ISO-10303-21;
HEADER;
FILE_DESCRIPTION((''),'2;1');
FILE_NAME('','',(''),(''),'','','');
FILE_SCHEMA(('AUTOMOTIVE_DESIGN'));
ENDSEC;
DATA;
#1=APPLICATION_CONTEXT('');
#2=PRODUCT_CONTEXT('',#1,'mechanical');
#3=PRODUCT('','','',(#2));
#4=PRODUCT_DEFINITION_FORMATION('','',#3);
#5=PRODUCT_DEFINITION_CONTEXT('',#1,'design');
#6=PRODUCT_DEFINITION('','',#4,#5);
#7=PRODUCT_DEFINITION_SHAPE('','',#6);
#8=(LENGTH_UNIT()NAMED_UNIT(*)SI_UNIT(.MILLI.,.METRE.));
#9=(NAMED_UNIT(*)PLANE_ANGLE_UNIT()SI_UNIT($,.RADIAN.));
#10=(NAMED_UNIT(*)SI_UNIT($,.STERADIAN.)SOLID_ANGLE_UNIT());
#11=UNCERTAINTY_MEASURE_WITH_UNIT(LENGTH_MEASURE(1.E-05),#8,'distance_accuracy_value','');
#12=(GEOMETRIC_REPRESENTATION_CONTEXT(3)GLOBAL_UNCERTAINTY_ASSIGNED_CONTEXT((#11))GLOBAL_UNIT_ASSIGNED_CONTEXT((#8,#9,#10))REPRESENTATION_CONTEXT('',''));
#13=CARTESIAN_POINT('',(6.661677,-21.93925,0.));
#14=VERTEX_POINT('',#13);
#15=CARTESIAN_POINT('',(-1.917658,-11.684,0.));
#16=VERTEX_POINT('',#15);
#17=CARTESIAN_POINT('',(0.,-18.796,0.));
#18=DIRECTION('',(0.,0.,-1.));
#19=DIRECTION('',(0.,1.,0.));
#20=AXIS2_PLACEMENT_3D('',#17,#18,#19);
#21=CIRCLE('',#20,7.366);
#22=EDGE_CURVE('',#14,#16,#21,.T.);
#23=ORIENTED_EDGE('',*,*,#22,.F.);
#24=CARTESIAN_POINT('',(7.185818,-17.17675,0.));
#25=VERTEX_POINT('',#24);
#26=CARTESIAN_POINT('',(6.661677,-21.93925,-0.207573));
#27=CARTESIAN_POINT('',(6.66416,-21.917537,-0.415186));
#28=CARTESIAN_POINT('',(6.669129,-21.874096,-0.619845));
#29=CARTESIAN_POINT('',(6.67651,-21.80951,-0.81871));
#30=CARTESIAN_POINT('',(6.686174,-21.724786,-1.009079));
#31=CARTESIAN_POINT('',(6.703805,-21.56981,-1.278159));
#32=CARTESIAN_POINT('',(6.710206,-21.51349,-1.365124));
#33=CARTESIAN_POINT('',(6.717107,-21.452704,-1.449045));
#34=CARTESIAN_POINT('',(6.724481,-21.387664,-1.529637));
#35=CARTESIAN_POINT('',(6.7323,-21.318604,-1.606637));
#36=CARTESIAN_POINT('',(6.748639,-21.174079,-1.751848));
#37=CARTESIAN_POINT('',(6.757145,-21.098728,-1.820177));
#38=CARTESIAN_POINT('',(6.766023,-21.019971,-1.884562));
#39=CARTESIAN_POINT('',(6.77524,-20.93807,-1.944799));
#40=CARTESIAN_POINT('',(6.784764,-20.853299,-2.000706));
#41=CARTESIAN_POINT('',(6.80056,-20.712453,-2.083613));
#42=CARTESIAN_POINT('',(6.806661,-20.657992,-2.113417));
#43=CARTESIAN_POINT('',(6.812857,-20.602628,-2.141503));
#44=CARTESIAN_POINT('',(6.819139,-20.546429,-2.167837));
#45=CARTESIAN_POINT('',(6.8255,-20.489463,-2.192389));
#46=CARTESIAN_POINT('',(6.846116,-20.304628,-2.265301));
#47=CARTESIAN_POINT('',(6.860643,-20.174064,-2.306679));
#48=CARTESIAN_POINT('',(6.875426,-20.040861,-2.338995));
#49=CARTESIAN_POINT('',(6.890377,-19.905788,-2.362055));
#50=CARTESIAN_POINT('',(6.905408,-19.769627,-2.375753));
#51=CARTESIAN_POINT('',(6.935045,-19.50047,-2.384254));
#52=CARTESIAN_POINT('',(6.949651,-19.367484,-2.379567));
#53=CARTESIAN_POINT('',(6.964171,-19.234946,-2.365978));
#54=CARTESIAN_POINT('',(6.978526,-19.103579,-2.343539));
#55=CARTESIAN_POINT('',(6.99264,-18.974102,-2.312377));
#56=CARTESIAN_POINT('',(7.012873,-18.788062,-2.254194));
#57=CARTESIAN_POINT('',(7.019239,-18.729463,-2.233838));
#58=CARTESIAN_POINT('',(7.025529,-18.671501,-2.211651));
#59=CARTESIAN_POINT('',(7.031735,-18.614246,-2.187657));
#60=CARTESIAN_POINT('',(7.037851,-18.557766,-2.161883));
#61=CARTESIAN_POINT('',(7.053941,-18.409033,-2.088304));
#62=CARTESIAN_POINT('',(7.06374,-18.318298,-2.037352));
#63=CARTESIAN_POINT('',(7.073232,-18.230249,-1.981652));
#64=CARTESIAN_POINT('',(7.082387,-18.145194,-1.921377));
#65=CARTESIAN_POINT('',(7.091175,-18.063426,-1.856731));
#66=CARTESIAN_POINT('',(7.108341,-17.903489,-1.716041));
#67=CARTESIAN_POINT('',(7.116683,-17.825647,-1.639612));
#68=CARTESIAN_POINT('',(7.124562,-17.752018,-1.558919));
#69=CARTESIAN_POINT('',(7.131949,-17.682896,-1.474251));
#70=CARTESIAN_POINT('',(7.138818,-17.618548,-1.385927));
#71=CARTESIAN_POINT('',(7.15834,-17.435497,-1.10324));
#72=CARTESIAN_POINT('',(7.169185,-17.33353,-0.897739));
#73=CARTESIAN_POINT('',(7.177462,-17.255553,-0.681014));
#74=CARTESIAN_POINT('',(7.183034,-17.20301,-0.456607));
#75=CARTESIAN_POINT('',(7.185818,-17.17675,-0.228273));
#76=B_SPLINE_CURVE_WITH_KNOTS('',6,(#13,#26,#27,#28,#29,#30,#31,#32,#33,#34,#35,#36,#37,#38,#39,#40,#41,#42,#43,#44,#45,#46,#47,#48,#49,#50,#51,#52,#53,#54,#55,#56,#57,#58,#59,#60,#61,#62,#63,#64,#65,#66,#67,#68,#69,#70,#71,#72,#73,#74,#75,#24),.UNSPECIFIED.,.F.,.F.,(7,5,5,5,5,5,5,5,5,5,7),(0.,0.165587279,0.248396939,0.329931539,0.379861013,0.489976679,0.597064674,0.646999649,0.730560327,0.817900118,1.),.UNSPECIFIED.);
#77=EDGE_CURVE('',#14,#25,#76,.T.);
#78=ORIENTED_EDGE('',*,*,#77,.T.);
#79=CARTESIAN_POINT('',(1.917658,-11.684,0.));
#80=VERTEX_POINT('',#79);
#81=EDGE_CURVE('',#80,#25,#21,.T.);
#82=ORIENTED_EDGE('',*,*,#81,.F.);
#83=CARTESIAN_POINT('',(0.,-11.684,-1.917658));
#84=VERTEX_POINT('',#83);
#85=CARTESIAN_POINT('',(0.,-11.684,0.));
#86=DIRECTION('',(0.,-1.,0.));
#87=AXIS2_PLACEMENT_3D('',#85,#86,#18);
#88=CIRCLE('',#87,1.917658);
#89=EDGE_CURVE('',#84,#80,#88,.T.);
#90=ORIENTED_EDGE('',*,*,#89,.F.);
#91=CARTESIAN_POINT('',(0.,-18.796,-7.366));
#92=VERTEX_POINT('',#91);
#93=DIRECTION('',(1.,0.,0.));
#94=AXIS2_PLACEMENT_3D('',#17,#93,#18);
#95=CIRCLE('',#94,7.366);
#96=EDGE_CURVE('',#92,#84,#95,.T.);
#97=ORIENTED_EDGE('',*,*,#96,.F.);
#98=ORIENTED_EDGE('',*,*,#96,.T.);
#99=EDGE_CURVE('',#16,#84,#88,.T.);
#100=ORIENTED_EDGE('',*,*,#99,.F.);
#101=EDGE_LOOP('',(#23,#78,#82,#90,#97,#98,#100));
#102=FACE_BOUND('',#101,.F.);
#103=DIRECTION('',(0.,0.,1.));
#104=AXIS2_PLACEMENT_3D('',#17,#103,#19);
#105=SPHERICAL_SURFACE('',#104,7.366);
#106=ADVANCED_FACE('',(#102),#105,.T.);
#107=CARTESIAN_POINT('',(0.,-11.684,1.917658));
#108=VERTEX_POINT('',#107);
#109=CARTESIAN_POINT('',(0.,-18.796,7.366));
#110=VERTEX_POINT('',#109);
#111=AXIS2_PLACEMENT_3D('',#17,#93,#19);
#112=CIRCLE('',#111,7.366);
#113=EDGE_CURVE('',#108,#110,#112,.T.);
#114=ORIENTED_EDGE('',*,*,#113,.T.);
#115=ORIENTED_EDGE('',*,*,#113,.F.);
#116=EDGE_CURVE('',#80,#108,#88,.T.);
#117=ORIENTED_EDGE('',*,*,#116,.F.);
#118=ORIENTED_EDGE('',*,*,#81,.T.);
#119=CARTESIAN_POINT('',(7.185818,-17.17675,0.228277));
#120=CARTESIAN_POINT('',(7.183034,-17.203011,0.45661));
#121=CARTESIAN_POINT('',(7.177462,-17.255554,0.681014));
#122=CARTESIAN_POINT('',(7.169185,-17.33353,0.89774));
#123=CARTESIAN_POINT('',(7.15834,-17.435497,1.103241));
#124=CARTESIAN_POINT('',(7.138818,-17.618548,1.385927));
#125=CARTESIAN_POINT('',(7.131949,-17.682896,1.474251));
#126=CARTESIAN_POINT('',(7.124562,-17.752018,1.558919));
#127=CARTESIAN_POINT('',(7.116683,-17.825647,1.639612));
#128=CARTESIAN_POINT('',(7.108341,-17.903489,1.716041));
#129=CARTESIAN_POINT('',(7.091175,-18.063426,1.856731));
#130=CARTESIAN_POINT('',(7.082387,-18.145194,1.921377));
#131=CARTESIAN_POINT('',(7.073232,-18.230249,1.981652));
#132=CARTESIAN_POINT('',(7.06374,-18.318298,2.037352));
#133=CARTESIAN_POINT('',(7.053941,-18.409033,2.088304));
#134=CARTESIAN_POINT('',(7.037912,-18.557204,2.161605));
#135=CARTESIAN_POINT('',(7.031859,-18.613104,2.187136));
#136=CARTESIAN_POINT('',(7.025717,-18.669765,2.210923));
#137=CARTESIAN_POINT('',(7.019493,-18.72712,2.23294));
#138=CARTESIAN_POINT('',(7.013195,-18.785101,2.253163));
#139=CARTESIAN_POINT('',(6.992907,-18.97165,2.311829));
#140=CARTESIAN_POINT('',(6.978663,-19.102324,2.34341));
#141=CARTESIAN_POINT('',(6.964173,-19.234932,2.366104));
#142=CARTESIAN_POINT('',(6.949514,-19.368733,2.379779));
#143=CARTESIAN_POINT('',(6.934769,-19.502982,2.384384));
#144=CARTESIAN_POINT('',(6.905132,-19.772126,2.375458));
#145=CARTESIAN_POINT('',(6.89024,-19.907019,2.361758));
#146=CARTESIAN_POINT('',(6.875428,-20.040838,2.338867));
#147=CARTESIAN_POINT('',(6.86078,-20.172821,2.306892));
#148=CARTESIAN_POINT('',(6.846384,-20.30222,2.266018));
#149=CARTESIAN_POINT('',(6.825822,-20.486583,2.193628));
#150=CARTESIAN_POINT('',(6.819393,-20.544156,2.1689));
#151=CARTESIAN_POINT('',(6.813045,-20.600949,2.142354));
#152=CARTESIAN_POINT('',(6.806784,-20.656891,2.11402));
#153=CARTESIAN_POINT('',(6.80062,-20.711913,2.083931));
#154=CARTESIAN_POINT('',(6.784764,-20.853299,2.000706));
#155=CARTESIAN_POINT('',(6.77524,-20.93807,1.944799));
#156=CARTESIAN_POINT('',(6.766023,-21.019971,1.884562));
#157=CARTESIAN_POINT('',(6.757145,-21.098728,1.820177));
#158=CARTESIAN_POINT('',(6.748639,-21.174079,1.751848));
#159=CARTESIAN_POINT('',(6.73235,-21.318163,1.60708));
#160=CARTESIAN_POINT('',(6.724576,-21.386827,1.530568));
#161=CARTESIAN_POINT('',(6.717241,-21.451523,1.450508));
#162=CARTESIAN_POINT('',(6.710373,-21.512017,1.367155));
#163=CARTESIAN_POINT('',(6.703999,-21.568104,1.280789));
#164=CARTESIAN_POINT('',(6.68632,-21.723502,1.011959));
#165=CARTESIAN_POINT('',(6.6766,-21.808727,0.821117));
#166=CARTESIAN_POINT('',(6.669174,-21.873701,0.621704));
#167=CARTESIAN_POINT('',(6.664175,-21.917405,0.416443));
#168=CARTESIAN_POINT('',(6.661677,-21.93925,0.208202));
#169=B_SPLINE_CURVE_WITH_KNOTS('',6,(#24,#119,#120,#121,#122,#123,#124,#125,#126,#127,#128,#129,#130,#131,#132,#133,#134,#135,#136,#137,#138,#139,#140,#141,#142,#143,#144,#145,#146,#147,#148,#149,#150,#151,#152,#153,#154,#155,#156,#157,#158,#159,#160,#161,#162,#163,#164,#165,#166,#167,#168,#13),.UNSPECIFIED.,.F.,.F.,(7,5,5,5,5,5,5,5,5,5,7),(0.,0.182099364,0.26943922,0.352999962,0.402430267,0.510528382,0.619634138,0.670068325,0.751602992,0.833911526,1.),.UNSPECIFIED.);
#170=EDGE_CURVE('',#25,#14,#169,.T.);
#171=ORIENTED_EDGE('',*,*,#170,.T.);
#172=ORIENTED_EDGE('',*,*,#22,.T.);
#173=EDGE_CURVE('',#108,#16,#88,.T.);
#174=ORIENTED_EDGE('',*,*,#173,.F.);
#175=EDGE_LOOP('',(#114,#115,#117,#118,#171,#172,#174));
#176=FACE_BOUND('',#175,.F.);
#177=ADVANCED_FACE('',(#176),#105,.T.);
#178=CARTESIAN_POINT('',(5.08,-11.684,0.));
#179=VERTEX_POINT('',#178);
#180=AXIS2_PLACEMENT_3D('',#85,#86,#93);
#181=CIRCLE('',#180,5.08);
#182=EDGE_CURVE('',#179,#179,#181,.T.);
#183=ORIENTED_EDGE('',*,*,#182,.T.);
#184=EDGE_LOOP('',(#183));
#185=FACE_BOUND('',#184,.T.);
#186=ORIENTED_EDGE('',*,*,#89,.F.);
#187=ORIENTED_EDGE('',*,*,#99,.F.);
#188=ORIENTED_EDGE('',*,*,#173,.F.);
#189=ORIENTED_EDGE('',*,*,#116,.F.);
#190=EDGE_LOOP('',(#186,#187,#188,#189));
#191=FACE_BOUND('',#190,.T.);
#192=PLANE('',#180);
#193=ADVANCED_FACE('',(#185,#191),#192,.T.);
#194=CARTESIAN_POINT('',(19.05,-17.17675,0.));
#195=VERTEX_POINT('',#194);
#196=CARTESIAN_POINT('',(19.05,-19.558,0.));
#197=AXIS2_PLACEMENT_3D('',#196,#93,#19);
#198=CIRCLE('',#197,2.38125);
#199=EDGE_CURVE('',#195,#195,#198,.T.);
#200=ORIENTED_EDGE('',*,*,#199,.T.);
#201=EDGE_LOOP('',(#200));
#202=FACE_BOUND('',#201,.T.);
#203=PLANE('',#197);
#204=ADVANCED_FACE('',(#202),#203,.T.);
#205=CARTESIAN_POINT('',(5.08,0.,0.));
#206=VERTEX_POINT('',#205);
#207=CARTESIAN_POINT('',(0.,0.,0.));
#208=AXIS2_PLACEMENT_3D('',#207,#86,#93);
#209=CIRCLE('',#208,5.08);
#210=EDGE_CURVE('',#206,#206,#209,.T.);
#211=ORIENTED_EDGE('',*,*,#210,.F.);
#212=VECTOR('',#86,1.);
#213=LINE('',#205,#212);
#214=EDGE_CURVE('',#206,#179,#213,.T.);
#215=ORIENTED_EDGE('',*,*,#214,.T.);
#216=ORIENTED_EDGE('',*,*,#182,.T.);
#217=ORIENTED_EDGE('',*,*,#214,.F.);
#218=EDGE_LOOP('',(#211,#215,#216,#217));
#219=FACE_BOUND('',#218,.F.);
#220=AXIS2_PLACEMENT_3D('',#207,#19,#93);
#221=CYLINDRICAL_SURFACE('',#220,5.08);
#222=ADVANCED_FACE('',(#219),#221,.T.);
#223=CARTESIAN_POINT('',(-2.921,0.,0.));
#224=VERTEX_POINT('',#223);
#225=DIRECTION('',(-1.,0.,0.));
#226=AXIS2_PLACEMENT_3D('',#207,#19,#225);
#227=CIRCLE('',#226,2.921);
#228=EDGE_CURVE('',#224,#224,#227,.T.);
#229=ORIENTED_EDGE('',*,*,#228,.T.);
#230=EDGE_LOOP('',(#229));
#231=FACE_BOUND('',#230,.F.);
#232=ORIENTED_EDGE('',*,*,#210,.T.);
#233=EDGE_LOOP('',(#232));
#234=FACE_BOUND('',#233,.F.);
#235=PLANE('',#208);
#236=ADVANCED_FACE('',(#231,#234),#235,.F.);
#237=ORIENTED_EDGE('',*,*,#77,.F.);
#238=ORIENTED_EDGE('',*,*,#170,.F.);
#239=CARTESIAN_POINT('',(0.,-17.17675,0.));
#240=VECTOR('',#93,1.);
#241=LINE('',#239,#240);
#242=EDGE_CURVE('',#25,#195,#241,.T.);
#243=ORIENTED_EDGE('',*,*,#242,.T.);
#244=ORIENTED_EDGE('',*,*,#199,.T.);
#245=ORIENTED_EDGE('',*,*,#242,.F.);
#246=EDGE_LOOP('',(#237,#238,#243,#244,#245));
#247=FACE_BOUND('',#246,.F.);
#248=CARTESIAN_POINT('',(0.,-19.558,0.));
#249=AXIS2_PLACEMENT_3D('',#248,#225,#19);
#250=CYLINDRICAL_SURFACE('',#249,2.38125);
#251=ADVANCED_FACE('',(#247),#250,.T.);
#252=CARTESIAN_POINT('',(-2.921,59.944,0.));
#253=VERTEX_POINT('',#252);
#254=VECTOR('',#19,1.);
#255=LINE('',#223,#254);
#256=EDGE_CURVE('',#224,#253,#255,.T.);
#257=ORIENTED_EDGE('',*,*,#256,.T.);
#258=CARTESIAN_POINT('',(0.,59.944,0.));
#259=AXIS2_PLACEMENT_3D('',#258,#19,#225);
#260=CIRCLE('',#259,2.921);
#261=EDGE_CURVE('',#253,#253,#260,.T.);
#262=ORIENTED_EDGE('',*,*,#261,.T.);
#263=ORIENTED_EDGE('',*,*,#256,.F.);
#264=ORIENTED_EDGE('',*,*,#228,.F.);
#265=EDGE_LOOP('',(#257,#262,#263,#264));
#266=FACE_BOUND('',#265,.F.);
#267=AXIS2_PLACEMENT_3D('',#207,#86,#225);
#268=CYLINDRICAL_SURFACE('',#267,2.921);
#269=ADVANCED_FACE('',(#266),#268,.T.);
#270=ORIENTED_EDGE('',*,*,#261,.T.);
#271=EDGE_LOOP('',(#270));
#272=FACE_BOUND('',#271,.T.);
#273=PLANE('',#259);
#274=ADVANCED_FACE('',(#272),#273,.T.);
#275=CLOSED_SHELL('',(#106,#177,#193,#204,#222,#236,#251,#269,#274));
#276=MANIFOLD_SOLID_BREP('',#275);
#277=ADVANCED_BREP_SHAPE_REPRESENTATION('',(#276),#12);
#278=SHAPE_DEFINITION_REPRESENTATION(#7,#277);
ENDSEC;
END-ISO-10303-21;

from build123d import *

# Parameters (mm, degrees)
F0_R     = 5.08
F1_DEPTH = 11.684
F4_R     = 2.921
F5_DEPTH = 59.944
F6_R     = 2.38125
F7_DEPTH = 19.05


with BuildPart() as f1:
    # F0 (on Front) → F1 (new body)
    with BuildSketch(Plane.XZ):
        Circle(F0_R)
    extrude(amount=F1_DEPTH)

    # F2 (on Right) → F3 (revolve)
    with BuildSketch(Plane.YZ):
        with BuildLine():
            ThreePointArc((-18.796, -7.366), (-13.5874514498, -5.2085485502), (-11.43, 0))
            ThreePointArc((-11.43, 0), (-13.5874514498, 5.2085485502), (-18.796, 7.366))
            Line((-18.796, 7.366), (-18.796, 0))
            Line((-18.796, 0), (-18.796, -7.366))
        make_face()
    revolve(axis=Axis((0, -18.796, 0), (0, 0, -1)))

    # F4 (on face) → F5 (join)
    with BuildSketch(Plane(origin=(0, 0, 0), x_dir=(-1, 0, 0), z_dir=(0, 1, 0))):
        Circle(F4_R)
    extrude(amount=F5_DEPTH)

    # F6 (on Right) → F7 (join)
    with BuildSketch(Plane.YZ):
        with Locations((-19.558, 0)):
            Circle(F6_R)
    extrude(amount=F7_DEPTH)


solid = f1.part
